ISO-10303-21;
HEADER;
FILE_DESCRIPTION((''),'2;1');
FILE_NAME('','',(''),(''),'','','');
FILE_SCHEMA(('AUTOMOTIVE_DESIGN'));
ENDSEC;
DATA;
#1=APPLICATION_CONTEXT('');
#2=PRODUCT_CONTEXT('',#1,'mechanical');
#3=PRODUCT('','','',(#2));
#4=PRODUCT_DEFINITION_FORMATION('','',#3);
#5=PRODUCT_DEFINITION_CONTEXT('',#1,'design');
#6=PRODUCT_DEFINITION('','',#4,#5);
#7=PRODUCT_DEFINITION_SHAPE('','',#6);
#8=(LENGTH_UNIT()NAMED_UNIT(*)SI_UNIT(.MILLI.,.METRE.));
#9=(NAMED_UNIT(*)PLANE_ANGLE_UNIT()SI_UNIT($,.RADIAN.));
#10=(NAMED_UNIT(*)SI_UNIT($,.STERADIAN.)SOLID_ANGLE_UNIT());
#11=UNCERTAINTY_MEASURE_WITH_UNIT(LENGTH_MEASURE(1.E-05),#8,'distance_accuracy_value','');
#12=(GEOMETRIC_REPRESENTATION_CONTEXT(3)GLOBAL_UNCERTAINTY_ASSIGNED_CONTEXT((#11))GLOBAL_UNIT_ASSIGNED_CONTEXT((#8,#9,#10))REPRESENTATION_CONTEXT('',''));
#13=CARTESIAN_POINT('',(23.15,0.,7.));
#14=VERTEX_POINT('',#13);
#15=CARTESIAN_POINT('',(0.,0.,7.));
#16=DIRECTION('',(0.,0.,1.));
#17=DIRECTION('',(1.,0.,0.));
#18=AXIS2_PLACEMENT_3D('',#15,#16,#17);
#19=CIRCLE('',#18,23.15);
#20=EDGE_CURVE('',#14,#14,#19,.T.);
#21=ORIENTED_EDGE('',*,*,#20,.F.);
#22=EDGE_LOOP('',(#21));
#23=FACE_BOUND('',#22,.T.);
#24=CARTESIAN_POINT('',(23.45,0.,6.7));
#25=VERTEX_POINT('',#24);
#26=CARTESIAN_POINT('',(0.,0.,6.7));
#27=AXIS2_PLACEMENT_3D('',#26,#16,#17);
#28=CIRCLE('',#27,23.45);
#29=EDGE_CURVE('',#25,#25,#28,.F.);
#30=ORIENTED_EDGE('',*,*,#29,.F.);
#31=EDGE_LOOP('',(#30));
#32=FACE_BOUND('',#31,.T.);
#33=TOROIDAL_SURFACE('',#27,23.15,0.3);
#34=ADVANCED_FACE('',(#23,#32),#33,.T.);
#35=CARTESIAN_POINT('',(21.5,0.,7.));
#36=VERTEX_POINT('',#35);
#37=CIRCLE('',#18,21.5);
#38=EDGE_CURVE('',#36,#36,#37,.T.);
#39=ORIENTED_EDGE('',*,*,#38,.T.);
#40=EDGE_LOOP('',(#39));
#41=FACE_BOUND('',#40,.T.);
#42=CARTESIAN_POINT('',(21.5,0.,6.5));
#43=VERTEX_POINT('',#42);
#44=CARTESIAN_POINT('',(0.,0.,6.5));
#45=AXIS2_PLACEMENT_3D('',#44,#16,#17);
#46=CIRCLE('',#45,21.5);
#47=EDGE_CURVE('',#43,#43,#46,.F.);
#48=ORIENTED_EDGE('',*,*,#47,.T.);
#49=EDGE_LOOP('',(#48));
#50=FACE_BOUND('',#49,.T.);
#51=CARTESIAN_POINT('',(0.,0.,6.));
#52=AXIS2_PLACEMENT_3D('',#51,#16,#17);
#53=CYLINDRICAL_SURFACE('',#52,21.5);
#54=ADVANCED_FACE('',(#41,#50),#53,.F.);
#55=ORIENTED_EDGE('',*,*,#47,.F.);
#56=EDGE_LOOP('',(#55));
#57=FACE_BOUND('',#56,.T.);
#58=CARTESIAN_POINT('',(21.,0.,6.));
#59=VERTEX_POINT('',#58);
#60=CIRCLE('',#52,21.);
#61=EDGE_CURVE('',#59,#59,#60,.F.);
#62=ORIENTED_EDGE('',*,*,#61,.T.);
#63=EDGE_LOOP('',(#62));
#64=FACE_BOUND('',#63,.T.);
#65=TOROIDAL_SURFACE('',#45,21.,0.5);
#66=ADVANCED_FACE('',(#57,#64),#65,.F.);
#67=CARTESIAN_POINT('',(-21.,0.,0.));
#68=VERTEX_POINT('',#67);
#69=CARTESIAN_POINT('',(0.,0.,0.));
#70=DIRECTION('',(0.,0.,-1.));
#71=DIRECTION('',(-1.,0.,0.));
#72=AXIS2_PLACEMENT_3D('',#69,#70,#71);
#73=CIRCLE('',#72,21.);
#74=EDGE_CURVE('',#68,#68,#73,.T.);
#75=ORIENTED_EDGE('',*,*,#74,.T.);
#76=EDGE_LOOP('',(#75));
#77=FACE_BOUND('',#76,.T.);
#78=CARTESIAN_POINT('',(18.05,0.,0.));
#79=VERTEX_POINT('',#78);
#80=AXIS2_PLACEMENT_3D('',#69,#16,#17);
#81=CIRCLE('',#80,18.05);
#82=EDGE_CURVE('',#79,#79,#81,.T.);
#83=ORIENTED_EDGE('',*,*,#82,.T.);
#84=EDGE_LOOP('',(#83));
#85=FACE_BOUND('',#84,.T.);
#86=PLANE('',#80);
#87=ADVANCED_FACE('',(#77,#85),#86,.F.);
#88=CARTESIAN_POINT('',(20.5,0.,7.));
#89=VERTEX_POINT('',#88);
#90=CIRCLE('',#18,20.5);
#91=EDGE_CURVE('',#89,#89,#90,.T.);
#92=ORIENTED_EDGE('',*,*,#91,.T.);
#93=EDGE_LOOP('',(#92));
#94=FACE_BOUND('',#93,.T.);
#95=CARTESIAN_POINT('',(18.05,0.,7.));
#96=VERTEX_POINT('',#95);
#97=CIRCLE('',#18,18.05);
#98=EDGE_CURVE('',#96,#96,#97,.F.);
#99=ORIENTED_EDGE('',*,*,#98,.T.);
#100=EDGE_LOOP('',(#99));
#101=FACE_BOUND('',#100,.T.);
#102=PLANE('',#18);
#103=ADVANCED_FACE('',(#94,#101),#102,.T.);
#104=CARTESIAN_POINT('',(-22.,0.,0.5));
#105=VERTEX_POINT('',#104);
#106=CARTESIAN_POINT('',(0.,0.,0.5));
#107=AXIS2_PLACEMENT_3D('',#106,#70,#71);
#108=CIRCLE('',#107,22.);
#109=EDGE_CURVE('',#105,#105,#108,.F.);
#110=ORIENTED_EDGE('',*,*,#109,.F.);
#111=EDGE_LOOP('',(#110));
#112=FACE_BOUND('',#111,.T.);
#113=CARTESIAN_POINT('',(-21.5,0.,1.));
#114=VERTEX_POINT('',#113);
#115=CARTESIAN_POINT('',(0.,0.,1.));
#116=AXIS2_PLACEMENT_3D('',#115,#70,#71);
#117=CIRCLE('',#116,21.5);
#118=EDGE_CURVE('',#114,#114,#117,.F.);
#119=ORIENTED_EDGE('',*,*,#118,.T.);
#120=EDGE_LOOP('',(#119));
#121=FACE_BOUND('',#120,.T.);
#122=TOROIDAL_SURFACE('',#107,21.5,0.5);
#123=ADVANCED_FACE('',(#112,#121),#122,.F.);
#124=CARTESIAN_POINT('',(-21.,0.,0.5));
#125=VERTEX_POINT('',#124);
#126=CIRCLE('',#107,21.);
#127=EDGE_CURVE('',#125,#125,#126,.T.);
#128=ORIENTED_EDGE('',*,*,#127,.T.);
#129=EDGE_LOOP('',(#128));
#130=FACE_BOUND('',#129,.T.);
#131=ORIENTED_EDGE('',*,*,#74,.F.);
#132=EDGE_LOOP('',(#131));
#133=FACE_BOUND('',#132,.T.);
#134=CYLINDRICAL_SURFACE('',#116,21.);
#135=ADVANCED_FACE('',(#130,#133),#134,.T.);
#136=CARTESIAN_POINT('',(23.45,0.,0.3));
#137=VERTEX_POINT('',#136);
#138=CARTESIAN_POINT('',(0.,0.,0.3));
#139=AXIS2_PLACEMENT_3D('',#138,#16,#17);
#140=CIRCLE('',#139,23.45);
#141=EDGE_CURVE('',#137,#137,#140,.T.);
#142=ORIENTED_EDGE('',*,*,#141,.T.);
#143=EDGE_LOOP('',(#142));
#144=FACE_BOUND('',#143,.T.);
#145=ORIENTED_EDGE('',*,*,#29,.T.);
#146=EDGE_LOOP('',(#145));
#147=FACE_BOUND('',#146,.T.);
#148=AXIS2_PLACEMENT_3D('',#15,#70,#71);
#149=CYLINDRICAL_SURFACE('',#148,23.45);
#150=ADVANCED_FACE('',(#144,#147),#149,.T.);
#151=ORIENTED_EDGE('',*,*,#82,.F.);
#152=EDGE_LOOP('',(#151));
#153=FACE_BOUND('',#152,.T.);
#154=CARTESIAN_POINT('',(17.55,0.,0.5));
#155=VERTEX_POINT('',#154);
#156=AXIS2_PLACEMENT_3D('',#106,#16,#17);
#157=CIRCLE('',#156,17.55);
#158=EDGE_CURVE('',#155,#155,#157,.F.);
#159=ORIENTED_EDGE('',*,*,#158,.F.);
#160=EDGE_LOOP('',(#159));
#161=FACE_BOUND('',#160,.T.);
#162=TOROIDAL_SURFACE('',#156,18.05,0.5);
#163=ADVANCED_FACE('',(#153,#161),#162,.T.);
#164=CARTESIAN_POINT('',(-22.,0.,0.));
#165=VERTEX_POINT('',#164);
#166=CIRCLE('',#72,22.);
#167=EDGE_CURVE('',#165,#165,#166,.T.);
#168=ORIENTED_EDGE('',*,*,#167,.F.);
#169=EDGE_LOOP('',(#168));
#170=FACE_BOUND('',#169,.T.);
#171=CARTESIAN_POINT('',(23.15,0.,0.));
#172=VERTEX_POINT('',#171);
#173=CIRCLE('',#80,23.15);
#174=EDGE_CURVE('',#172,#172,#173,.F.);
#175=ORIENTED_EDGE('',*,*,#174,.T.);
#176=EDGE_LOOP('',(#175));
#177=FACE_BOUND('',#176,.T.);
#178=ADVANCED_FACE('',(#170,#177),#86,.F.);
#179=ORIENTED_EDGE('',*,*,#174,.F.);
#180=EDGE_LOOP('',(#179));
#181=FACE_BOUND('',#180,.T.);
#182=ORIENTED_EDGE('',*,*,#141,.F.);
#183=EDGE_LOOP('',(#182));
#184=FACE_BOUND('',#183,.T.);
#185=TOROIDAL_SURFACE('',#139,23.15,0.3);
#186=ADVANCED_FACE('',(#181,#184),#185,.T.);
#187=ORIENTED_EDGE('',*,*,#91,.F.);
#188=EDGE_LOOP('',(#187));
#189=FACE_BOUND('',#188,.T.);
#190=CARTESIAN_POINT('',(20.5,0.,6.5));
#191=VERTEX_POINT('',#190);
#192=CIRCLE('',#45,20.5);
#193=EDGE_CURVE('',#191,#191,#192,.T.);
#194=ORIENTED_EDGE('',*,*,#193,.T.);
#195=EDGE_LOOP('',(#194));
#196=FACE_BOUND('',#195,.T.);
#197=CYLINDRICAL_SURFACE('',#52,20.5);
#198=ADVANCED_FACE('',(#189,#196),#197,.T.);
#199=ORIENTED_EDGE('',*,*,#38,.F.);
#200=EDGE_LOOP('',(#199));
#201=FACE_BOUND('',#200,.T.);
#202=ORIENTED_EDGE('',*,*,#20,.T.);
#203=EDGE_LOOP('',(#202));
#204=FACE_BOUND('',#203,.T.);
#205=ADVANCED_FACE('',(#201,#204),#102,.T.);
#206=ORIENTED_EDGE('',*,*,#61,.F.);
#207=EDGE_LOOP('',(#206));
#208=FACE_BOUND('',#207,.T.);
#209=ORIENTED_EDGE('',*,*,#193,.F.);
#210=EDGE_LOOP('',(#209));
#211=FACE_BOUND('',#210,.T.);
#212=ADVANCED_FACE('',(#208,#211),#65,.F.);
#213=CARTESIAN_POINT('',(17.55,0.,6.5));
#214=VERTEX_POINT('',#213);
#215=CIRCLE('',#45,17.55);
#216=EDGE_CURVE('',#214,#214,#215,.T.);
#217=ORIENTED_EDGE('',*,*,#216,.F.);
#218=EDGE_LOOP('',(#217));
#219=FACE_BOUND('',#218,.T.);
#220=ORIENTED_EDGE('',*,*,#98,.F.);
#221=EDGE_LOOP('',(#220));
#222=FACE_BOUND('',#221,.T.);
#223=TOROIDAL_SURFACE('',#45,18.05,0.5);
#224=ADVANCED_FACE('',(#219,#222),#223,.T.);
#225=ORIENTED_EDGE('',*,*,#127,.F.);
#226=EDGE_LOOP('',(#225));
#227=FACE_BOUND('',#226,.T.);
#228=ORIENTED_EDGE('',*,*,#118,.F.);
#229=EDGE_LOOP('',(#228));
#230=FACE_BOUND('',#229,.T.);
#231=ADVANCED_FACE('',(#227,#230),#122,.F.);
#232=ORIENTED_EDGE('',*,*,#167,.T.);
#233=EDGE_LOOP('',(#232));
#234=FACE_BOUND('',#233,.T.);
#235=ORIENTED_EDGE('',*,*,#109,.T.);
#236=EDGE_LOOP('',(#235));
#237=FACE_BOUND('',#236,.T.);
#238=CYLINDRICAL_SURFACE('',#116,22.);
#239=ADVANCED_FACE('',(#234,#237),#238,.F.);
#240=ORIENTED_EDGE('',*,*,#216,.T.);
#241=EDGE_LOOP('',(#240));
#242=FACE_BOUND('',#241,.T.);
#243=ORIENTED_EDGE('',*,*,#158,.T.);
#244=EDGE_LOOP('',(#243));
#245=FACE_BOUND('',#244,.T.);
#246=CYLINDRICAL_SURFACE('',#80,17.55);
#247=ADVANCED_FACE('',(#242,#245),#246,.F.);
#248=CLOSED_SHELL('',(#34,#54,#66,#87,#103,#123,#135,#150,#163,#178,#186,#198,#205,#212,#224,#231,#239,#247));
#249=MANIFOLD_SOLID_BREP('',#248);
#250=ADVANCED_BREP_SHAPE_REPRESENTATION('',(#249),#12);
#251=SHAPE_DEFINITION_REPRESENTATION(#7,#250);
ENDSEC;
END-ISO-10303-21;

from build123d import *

# Parameters (mm, degrees)
SKETCH1_R           = 23.45
BOSS_EXTRUDE1_DEPTH = 7
SKETCH2_R           = 17.55
CUT_EXTRUDE1_DEPTH  = 34.894026022
FILLET1_R           = 0.5
SKETCH3_R           = 21.5
SKETCH3_R_2         = 20.5
CUT_EXTRUDE2_DEPTH  = 1
FILLET2_R           = 0.5
FILLET4_R           = 0.3
SKETCH4_R           = 22
SKETCH4_R_2         = 21
CUT_EXTRUDE3_DEPTH  = 1
FILLET5_R           = 0.5


with BuildPart() as part:
    # Sketch1 → Boss-Extrude1 (new body)
    with BuildSketch(Plane.XY):
        Circle(SKETCH1_R)
    extrude(amount=BOSS_EXTRUDE1_DEPTH)

    # Sketch2 → Cut-Extrude1 (cut, through all)
    with BuildSketch(Plane.XY.offset(7)):
        Circle(SKETCH2_R)
    extrude(amount=-CUT_EXTRUDE1_DEPTH, mode=Mode.SUBTRACT)

    # Fillet1
    fillet1_edges = [part.edges().sort_by_distance(p)[0] for p in [
        (-17.55, 0, 0),
        (-17.55, 0, 7),
    ]]
    fillet(fillet1_edges, radius=FILLET1_R)

    # Sketch3 → Cut-Extrude2 (cut)
    with BuildSketch(Plane.XY.offset(7)):
        Circle(SKETCH3_R)
        Circle(SKETCH3_R_2, mode=Mode.SUBTRACT)
    extrude(amount=-CUT_EXTRUDE2_DEPTH, mode=Mode.SUBTRACT)

    # Fillet2
    fillet2_edges = [part.edges().sort_by_distance(p)[0] for p in [
        (-21.5, 0, 6),
        (-20.5, 0, 6),
    ]]
    fillet(fillet2_edges, radius=FILLET2_R - 0.0001)  # a hair under: the kernel refuses the full size

    # Fillet4
    fillet4_edges = [part.edges().sort_by_distance(p)[0] for p in [
        (-23.45, 0, 0),
        (-23.45, 0, 7),
    ]]
    fillet(fillet4_edges, radius=FILLET4_R)

    # Sketch4 → Cut-Extrude3 (cut)
    with BuildSketch(Plane(origin=(0, 0, 0), x_dir=(-1, 0, 0), z_dir=(0, 0, -1))):
        Circle(SKETCH4_R)
        Circle(SKETCH4_R_2, mode=Mode.SUBTRACT)
    extrude(amount=-CUT_EXTRUDE3_DEPTH, mode=Mode.SUBTRACT)

    # Fillet5
    fillet5_edges = [part.edges().sort_by_distance(p)[0] for p in [
        (22, 0, 1),
        (21, 0, 1),
    ]]
    fillet(fillet5_edges, radius=FILLET5_R - 0.0001)  # a hair under: the kernel refuses the full size


solid = part.part
